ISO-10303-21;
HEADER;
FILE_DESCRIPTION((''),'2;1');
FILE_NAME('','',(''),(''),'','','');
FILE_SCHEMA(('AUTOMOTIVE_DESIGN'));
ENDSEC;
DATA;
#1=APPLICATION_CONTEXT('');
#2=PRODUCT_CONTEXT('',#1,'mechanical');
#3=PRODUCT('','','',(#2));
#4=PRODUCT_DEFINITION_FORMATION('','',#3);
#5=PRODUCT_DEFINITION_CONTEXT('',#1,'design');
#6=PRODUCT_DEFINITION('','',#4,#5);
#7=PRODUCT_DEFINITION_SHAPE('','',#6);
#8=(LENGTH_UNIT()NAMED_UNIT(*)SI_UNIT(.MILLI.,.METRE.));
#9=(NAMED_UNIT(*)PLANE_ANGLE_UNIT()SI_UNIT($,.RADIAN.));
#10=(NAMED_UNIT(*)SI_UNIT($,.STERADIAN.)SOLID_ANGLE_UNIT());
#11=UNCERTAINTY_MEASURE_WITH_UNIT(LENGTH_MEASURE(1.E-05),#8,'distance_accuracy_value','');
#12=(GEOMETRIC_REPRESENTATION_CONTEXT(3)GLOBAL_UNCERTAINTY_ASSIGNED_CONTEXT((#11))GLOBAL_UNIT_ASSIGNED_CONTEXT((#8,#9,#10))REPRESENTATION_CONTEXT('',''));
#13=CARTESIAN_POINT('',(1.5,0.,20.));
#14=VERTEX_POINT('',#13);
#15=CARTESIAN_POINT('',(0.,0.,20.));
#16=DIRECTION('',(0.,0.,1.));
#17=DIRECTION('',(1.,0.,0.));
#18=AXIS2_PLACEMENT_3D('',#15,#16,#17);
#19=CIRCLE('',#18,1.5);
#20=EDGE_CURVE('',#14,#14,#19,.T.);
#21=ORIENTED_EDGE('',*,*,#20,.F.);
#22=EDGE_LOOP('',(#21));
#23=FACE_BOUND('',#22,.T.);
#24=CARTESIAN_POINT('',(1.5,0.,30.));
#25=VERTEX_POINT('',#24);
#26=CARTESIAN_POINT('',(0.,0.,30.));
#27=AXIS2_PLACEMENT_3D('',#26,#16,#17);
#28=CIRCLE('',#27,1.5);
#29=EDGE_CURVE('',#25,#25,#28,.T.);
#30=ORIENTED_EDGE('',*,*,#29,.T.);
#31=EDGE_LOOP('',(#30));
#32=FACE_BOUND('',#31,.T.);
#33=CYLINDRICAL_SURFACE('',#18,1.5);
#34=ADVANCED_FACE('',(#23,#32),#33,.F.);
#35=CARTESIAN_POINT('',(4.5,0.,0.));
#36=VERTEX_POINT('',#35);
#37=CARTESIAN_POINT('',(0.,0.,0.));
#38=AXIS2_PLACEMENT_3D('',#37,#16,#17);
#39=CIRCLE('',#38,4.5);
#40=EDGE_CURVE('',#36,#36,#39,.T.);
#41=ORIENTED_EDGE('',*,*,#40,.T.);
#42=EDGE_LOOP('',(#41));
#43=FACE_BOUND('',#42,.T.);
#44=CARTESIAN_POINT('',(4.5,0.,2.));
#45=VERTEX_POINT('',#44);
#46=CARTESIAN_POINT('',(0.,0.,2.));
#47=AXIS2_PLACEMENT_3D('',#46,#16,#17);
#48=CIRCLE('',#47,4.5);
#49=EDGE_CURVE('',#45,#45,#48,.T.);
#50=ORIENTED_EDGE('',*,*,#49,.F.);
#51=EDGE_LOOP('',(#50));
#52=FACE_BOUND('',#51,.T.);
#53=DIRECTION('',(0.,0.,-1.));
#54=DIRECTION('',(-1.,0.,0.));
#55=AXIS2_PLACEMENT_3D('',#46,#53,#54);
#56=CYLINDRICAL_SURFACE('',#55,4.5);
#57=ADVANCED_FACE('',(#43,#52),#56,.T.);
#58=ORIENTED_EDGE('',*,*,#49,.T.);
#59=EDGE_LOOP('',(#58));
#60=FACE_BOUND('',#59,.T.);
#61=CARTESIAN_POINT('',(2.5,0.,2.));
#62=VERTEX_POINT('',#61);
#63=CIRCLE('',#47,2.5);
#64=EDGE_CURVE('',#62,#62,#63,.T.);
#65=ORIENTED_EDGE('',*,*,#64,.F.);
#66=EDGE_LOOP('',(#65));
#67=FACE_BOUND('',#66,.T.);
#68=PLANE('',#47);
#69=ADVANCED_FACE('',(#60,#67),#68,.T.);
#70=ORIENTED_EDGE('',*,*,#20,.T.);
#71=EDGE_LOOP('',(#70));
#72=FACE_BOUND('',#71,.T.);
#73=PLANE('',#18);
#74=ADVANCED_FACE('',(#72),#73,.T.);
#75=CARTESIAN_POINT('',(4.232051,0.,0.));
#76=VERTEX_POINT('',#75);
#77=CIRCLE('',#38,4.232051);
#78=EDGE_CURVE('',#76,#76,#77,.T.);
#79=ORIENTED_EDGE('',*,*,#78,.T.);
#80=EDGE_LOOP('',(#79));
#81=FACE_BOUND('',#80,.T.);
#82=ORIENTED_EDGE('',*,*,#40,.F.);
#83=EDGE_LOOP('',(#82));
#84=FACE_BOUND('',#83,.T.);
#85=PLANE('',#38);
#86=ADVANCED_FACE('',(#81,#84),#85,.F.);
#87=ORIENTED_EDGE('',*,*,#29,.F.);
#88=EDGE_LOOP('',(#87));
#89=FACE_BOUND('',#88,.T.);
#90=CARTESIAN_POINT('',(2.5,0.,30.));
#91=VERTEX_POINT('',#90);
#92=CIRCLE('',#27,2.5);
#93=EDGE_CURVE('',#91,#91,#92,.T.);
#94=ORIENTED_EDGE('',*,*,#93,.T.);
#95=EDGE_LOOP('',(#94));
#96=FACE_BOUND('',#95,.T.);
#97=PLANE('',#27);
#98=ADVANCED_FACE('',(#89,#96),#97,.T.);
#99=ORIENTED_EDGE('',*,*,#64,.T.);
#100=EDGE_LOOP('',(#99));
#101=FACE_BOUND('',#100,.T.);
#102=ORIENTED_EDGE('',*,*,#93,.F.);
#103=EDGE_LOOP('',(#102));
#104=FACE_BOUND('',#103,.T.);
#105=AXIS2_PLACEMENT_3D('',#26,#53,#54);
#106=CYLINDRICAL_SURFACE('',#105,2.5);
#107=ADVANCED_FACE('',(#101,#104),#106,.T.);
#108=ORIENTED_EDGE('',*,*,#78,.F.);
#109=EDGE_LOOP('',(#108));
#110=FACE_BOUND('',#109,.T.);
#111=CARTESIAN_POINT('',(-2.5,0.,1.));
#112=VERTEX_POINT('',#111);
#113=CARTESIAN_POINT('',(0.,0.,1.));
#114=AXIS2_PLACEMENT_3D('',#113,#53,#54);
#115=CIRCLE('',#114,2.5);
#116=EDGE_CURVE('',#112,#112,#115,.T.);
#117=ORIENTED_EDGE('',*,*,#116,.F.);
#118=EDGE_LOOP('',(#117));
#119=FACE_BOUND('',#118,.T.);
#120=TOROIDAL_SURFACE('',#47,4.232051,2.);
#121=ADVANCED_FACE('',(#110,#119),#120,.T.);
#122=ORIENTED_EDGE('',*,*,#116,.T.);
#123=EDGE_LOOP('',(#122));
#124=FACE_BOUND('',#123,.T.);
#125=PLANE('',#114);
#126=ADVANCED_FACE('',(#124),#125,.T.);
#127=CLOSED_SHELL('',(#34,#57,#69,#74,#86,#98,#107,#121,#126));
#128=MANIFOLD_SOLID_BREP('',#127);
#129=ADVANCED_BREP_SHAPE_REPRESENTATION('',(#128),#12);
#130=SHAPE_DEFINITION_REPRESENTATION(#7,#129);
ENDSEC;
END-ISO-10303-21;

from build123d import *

# Parameters (mm, degrees)
SKETCH1_R           = 4.5
SKETCH1_R_2         = 2.5
BOSS_EXTRUDE1_DEPTH = 2
SKETCH5_R           = 2.5
BOSS_EXTRUDE3_DEPTH = 28
SKETCH6_R           = 1.5
CUT_EXTRUDE3_DEPTH  = 10
BOSS_EXTRUDE4_START = 1
SKETCH7_R           = 2.5
BOSS_EXTRUDE4_DEPTH = 1
FILLET1_R           = 2


with BuildPart() as part:
    # Sketch1 → Boss-Extrude1 (new body)
    with BuildSketch(Plane.XY):
        Circle(SKETCH1_R)
        Circle(SKETCH1_R_2, mode=Mode.SUBTRACT)
    extrude(amount=BOSS_EXTRUDE1_DEPTH)



with BuildPart() as body_2:
    # Sketch5 → Boss-Extrude3 (new body)
    with BuildSketch(Plane.XY.offset(2)):
        Circle(SKETCH5_R)
    extrude(amount=BOSS_EXTRUDE3_DEPTH)

    # Sketch6 → Cut-Extrude3 (cut)
    with BuildSketch(Plane.XY.offset(30)):
        Circle(SKETCH6_R)
    extrude(amount=-CUT_EXTRUDE3_DEPTH, mode=Mode.SUBTRACT)


with BuildPart() as part_1:
    add(part.part)

    add(body_2.part)  # Boss-Extrude4 merges body 2
    # Sketch7 → Boss-Extrude4 (add)
    with BuildSketch(Plane(origin=(0, 0, 2), x_dir=(-1, 0, 0), z_dir=(0, 0, -1)).offset(BOSS_EXTRUDE4_START)):
        Circle(SKETCH7_R)
    extrude(amount=-BOSS_EXTRUDE4_DEPTH)

    # Fillet1
    # the kernel refuses this fillet: 2 mm, written as the material it takes off along each edge
    with BuildSketch(Plane(origin=(0, 0, 0), x_dir=(1, 0, 0), z_dir=(0, -1, 0))) as fillet1_piece_1:
        with BuildLine():
            CenterArc((4.232050808, 2), FILLET1_R, 210, 60)
            Line((2.5, 1), (2.465358984, 0.98))
            ThreePointArc((2.465358984, 0.98), (2.46, 0.5), (2.46, 0))
            Line((2.46, 0), (2.5, -0.04))
            Line((2.5, -0.04), (4.232050808, -0.04))
            Line((4.232050808, -0.04), (4.232050808, 0))
        make_face()
    revolve(axis=Axis((0, 0, 0), (0, 0, 1)), mode=Mode.SUBTRACT)


solid = part_1.part
